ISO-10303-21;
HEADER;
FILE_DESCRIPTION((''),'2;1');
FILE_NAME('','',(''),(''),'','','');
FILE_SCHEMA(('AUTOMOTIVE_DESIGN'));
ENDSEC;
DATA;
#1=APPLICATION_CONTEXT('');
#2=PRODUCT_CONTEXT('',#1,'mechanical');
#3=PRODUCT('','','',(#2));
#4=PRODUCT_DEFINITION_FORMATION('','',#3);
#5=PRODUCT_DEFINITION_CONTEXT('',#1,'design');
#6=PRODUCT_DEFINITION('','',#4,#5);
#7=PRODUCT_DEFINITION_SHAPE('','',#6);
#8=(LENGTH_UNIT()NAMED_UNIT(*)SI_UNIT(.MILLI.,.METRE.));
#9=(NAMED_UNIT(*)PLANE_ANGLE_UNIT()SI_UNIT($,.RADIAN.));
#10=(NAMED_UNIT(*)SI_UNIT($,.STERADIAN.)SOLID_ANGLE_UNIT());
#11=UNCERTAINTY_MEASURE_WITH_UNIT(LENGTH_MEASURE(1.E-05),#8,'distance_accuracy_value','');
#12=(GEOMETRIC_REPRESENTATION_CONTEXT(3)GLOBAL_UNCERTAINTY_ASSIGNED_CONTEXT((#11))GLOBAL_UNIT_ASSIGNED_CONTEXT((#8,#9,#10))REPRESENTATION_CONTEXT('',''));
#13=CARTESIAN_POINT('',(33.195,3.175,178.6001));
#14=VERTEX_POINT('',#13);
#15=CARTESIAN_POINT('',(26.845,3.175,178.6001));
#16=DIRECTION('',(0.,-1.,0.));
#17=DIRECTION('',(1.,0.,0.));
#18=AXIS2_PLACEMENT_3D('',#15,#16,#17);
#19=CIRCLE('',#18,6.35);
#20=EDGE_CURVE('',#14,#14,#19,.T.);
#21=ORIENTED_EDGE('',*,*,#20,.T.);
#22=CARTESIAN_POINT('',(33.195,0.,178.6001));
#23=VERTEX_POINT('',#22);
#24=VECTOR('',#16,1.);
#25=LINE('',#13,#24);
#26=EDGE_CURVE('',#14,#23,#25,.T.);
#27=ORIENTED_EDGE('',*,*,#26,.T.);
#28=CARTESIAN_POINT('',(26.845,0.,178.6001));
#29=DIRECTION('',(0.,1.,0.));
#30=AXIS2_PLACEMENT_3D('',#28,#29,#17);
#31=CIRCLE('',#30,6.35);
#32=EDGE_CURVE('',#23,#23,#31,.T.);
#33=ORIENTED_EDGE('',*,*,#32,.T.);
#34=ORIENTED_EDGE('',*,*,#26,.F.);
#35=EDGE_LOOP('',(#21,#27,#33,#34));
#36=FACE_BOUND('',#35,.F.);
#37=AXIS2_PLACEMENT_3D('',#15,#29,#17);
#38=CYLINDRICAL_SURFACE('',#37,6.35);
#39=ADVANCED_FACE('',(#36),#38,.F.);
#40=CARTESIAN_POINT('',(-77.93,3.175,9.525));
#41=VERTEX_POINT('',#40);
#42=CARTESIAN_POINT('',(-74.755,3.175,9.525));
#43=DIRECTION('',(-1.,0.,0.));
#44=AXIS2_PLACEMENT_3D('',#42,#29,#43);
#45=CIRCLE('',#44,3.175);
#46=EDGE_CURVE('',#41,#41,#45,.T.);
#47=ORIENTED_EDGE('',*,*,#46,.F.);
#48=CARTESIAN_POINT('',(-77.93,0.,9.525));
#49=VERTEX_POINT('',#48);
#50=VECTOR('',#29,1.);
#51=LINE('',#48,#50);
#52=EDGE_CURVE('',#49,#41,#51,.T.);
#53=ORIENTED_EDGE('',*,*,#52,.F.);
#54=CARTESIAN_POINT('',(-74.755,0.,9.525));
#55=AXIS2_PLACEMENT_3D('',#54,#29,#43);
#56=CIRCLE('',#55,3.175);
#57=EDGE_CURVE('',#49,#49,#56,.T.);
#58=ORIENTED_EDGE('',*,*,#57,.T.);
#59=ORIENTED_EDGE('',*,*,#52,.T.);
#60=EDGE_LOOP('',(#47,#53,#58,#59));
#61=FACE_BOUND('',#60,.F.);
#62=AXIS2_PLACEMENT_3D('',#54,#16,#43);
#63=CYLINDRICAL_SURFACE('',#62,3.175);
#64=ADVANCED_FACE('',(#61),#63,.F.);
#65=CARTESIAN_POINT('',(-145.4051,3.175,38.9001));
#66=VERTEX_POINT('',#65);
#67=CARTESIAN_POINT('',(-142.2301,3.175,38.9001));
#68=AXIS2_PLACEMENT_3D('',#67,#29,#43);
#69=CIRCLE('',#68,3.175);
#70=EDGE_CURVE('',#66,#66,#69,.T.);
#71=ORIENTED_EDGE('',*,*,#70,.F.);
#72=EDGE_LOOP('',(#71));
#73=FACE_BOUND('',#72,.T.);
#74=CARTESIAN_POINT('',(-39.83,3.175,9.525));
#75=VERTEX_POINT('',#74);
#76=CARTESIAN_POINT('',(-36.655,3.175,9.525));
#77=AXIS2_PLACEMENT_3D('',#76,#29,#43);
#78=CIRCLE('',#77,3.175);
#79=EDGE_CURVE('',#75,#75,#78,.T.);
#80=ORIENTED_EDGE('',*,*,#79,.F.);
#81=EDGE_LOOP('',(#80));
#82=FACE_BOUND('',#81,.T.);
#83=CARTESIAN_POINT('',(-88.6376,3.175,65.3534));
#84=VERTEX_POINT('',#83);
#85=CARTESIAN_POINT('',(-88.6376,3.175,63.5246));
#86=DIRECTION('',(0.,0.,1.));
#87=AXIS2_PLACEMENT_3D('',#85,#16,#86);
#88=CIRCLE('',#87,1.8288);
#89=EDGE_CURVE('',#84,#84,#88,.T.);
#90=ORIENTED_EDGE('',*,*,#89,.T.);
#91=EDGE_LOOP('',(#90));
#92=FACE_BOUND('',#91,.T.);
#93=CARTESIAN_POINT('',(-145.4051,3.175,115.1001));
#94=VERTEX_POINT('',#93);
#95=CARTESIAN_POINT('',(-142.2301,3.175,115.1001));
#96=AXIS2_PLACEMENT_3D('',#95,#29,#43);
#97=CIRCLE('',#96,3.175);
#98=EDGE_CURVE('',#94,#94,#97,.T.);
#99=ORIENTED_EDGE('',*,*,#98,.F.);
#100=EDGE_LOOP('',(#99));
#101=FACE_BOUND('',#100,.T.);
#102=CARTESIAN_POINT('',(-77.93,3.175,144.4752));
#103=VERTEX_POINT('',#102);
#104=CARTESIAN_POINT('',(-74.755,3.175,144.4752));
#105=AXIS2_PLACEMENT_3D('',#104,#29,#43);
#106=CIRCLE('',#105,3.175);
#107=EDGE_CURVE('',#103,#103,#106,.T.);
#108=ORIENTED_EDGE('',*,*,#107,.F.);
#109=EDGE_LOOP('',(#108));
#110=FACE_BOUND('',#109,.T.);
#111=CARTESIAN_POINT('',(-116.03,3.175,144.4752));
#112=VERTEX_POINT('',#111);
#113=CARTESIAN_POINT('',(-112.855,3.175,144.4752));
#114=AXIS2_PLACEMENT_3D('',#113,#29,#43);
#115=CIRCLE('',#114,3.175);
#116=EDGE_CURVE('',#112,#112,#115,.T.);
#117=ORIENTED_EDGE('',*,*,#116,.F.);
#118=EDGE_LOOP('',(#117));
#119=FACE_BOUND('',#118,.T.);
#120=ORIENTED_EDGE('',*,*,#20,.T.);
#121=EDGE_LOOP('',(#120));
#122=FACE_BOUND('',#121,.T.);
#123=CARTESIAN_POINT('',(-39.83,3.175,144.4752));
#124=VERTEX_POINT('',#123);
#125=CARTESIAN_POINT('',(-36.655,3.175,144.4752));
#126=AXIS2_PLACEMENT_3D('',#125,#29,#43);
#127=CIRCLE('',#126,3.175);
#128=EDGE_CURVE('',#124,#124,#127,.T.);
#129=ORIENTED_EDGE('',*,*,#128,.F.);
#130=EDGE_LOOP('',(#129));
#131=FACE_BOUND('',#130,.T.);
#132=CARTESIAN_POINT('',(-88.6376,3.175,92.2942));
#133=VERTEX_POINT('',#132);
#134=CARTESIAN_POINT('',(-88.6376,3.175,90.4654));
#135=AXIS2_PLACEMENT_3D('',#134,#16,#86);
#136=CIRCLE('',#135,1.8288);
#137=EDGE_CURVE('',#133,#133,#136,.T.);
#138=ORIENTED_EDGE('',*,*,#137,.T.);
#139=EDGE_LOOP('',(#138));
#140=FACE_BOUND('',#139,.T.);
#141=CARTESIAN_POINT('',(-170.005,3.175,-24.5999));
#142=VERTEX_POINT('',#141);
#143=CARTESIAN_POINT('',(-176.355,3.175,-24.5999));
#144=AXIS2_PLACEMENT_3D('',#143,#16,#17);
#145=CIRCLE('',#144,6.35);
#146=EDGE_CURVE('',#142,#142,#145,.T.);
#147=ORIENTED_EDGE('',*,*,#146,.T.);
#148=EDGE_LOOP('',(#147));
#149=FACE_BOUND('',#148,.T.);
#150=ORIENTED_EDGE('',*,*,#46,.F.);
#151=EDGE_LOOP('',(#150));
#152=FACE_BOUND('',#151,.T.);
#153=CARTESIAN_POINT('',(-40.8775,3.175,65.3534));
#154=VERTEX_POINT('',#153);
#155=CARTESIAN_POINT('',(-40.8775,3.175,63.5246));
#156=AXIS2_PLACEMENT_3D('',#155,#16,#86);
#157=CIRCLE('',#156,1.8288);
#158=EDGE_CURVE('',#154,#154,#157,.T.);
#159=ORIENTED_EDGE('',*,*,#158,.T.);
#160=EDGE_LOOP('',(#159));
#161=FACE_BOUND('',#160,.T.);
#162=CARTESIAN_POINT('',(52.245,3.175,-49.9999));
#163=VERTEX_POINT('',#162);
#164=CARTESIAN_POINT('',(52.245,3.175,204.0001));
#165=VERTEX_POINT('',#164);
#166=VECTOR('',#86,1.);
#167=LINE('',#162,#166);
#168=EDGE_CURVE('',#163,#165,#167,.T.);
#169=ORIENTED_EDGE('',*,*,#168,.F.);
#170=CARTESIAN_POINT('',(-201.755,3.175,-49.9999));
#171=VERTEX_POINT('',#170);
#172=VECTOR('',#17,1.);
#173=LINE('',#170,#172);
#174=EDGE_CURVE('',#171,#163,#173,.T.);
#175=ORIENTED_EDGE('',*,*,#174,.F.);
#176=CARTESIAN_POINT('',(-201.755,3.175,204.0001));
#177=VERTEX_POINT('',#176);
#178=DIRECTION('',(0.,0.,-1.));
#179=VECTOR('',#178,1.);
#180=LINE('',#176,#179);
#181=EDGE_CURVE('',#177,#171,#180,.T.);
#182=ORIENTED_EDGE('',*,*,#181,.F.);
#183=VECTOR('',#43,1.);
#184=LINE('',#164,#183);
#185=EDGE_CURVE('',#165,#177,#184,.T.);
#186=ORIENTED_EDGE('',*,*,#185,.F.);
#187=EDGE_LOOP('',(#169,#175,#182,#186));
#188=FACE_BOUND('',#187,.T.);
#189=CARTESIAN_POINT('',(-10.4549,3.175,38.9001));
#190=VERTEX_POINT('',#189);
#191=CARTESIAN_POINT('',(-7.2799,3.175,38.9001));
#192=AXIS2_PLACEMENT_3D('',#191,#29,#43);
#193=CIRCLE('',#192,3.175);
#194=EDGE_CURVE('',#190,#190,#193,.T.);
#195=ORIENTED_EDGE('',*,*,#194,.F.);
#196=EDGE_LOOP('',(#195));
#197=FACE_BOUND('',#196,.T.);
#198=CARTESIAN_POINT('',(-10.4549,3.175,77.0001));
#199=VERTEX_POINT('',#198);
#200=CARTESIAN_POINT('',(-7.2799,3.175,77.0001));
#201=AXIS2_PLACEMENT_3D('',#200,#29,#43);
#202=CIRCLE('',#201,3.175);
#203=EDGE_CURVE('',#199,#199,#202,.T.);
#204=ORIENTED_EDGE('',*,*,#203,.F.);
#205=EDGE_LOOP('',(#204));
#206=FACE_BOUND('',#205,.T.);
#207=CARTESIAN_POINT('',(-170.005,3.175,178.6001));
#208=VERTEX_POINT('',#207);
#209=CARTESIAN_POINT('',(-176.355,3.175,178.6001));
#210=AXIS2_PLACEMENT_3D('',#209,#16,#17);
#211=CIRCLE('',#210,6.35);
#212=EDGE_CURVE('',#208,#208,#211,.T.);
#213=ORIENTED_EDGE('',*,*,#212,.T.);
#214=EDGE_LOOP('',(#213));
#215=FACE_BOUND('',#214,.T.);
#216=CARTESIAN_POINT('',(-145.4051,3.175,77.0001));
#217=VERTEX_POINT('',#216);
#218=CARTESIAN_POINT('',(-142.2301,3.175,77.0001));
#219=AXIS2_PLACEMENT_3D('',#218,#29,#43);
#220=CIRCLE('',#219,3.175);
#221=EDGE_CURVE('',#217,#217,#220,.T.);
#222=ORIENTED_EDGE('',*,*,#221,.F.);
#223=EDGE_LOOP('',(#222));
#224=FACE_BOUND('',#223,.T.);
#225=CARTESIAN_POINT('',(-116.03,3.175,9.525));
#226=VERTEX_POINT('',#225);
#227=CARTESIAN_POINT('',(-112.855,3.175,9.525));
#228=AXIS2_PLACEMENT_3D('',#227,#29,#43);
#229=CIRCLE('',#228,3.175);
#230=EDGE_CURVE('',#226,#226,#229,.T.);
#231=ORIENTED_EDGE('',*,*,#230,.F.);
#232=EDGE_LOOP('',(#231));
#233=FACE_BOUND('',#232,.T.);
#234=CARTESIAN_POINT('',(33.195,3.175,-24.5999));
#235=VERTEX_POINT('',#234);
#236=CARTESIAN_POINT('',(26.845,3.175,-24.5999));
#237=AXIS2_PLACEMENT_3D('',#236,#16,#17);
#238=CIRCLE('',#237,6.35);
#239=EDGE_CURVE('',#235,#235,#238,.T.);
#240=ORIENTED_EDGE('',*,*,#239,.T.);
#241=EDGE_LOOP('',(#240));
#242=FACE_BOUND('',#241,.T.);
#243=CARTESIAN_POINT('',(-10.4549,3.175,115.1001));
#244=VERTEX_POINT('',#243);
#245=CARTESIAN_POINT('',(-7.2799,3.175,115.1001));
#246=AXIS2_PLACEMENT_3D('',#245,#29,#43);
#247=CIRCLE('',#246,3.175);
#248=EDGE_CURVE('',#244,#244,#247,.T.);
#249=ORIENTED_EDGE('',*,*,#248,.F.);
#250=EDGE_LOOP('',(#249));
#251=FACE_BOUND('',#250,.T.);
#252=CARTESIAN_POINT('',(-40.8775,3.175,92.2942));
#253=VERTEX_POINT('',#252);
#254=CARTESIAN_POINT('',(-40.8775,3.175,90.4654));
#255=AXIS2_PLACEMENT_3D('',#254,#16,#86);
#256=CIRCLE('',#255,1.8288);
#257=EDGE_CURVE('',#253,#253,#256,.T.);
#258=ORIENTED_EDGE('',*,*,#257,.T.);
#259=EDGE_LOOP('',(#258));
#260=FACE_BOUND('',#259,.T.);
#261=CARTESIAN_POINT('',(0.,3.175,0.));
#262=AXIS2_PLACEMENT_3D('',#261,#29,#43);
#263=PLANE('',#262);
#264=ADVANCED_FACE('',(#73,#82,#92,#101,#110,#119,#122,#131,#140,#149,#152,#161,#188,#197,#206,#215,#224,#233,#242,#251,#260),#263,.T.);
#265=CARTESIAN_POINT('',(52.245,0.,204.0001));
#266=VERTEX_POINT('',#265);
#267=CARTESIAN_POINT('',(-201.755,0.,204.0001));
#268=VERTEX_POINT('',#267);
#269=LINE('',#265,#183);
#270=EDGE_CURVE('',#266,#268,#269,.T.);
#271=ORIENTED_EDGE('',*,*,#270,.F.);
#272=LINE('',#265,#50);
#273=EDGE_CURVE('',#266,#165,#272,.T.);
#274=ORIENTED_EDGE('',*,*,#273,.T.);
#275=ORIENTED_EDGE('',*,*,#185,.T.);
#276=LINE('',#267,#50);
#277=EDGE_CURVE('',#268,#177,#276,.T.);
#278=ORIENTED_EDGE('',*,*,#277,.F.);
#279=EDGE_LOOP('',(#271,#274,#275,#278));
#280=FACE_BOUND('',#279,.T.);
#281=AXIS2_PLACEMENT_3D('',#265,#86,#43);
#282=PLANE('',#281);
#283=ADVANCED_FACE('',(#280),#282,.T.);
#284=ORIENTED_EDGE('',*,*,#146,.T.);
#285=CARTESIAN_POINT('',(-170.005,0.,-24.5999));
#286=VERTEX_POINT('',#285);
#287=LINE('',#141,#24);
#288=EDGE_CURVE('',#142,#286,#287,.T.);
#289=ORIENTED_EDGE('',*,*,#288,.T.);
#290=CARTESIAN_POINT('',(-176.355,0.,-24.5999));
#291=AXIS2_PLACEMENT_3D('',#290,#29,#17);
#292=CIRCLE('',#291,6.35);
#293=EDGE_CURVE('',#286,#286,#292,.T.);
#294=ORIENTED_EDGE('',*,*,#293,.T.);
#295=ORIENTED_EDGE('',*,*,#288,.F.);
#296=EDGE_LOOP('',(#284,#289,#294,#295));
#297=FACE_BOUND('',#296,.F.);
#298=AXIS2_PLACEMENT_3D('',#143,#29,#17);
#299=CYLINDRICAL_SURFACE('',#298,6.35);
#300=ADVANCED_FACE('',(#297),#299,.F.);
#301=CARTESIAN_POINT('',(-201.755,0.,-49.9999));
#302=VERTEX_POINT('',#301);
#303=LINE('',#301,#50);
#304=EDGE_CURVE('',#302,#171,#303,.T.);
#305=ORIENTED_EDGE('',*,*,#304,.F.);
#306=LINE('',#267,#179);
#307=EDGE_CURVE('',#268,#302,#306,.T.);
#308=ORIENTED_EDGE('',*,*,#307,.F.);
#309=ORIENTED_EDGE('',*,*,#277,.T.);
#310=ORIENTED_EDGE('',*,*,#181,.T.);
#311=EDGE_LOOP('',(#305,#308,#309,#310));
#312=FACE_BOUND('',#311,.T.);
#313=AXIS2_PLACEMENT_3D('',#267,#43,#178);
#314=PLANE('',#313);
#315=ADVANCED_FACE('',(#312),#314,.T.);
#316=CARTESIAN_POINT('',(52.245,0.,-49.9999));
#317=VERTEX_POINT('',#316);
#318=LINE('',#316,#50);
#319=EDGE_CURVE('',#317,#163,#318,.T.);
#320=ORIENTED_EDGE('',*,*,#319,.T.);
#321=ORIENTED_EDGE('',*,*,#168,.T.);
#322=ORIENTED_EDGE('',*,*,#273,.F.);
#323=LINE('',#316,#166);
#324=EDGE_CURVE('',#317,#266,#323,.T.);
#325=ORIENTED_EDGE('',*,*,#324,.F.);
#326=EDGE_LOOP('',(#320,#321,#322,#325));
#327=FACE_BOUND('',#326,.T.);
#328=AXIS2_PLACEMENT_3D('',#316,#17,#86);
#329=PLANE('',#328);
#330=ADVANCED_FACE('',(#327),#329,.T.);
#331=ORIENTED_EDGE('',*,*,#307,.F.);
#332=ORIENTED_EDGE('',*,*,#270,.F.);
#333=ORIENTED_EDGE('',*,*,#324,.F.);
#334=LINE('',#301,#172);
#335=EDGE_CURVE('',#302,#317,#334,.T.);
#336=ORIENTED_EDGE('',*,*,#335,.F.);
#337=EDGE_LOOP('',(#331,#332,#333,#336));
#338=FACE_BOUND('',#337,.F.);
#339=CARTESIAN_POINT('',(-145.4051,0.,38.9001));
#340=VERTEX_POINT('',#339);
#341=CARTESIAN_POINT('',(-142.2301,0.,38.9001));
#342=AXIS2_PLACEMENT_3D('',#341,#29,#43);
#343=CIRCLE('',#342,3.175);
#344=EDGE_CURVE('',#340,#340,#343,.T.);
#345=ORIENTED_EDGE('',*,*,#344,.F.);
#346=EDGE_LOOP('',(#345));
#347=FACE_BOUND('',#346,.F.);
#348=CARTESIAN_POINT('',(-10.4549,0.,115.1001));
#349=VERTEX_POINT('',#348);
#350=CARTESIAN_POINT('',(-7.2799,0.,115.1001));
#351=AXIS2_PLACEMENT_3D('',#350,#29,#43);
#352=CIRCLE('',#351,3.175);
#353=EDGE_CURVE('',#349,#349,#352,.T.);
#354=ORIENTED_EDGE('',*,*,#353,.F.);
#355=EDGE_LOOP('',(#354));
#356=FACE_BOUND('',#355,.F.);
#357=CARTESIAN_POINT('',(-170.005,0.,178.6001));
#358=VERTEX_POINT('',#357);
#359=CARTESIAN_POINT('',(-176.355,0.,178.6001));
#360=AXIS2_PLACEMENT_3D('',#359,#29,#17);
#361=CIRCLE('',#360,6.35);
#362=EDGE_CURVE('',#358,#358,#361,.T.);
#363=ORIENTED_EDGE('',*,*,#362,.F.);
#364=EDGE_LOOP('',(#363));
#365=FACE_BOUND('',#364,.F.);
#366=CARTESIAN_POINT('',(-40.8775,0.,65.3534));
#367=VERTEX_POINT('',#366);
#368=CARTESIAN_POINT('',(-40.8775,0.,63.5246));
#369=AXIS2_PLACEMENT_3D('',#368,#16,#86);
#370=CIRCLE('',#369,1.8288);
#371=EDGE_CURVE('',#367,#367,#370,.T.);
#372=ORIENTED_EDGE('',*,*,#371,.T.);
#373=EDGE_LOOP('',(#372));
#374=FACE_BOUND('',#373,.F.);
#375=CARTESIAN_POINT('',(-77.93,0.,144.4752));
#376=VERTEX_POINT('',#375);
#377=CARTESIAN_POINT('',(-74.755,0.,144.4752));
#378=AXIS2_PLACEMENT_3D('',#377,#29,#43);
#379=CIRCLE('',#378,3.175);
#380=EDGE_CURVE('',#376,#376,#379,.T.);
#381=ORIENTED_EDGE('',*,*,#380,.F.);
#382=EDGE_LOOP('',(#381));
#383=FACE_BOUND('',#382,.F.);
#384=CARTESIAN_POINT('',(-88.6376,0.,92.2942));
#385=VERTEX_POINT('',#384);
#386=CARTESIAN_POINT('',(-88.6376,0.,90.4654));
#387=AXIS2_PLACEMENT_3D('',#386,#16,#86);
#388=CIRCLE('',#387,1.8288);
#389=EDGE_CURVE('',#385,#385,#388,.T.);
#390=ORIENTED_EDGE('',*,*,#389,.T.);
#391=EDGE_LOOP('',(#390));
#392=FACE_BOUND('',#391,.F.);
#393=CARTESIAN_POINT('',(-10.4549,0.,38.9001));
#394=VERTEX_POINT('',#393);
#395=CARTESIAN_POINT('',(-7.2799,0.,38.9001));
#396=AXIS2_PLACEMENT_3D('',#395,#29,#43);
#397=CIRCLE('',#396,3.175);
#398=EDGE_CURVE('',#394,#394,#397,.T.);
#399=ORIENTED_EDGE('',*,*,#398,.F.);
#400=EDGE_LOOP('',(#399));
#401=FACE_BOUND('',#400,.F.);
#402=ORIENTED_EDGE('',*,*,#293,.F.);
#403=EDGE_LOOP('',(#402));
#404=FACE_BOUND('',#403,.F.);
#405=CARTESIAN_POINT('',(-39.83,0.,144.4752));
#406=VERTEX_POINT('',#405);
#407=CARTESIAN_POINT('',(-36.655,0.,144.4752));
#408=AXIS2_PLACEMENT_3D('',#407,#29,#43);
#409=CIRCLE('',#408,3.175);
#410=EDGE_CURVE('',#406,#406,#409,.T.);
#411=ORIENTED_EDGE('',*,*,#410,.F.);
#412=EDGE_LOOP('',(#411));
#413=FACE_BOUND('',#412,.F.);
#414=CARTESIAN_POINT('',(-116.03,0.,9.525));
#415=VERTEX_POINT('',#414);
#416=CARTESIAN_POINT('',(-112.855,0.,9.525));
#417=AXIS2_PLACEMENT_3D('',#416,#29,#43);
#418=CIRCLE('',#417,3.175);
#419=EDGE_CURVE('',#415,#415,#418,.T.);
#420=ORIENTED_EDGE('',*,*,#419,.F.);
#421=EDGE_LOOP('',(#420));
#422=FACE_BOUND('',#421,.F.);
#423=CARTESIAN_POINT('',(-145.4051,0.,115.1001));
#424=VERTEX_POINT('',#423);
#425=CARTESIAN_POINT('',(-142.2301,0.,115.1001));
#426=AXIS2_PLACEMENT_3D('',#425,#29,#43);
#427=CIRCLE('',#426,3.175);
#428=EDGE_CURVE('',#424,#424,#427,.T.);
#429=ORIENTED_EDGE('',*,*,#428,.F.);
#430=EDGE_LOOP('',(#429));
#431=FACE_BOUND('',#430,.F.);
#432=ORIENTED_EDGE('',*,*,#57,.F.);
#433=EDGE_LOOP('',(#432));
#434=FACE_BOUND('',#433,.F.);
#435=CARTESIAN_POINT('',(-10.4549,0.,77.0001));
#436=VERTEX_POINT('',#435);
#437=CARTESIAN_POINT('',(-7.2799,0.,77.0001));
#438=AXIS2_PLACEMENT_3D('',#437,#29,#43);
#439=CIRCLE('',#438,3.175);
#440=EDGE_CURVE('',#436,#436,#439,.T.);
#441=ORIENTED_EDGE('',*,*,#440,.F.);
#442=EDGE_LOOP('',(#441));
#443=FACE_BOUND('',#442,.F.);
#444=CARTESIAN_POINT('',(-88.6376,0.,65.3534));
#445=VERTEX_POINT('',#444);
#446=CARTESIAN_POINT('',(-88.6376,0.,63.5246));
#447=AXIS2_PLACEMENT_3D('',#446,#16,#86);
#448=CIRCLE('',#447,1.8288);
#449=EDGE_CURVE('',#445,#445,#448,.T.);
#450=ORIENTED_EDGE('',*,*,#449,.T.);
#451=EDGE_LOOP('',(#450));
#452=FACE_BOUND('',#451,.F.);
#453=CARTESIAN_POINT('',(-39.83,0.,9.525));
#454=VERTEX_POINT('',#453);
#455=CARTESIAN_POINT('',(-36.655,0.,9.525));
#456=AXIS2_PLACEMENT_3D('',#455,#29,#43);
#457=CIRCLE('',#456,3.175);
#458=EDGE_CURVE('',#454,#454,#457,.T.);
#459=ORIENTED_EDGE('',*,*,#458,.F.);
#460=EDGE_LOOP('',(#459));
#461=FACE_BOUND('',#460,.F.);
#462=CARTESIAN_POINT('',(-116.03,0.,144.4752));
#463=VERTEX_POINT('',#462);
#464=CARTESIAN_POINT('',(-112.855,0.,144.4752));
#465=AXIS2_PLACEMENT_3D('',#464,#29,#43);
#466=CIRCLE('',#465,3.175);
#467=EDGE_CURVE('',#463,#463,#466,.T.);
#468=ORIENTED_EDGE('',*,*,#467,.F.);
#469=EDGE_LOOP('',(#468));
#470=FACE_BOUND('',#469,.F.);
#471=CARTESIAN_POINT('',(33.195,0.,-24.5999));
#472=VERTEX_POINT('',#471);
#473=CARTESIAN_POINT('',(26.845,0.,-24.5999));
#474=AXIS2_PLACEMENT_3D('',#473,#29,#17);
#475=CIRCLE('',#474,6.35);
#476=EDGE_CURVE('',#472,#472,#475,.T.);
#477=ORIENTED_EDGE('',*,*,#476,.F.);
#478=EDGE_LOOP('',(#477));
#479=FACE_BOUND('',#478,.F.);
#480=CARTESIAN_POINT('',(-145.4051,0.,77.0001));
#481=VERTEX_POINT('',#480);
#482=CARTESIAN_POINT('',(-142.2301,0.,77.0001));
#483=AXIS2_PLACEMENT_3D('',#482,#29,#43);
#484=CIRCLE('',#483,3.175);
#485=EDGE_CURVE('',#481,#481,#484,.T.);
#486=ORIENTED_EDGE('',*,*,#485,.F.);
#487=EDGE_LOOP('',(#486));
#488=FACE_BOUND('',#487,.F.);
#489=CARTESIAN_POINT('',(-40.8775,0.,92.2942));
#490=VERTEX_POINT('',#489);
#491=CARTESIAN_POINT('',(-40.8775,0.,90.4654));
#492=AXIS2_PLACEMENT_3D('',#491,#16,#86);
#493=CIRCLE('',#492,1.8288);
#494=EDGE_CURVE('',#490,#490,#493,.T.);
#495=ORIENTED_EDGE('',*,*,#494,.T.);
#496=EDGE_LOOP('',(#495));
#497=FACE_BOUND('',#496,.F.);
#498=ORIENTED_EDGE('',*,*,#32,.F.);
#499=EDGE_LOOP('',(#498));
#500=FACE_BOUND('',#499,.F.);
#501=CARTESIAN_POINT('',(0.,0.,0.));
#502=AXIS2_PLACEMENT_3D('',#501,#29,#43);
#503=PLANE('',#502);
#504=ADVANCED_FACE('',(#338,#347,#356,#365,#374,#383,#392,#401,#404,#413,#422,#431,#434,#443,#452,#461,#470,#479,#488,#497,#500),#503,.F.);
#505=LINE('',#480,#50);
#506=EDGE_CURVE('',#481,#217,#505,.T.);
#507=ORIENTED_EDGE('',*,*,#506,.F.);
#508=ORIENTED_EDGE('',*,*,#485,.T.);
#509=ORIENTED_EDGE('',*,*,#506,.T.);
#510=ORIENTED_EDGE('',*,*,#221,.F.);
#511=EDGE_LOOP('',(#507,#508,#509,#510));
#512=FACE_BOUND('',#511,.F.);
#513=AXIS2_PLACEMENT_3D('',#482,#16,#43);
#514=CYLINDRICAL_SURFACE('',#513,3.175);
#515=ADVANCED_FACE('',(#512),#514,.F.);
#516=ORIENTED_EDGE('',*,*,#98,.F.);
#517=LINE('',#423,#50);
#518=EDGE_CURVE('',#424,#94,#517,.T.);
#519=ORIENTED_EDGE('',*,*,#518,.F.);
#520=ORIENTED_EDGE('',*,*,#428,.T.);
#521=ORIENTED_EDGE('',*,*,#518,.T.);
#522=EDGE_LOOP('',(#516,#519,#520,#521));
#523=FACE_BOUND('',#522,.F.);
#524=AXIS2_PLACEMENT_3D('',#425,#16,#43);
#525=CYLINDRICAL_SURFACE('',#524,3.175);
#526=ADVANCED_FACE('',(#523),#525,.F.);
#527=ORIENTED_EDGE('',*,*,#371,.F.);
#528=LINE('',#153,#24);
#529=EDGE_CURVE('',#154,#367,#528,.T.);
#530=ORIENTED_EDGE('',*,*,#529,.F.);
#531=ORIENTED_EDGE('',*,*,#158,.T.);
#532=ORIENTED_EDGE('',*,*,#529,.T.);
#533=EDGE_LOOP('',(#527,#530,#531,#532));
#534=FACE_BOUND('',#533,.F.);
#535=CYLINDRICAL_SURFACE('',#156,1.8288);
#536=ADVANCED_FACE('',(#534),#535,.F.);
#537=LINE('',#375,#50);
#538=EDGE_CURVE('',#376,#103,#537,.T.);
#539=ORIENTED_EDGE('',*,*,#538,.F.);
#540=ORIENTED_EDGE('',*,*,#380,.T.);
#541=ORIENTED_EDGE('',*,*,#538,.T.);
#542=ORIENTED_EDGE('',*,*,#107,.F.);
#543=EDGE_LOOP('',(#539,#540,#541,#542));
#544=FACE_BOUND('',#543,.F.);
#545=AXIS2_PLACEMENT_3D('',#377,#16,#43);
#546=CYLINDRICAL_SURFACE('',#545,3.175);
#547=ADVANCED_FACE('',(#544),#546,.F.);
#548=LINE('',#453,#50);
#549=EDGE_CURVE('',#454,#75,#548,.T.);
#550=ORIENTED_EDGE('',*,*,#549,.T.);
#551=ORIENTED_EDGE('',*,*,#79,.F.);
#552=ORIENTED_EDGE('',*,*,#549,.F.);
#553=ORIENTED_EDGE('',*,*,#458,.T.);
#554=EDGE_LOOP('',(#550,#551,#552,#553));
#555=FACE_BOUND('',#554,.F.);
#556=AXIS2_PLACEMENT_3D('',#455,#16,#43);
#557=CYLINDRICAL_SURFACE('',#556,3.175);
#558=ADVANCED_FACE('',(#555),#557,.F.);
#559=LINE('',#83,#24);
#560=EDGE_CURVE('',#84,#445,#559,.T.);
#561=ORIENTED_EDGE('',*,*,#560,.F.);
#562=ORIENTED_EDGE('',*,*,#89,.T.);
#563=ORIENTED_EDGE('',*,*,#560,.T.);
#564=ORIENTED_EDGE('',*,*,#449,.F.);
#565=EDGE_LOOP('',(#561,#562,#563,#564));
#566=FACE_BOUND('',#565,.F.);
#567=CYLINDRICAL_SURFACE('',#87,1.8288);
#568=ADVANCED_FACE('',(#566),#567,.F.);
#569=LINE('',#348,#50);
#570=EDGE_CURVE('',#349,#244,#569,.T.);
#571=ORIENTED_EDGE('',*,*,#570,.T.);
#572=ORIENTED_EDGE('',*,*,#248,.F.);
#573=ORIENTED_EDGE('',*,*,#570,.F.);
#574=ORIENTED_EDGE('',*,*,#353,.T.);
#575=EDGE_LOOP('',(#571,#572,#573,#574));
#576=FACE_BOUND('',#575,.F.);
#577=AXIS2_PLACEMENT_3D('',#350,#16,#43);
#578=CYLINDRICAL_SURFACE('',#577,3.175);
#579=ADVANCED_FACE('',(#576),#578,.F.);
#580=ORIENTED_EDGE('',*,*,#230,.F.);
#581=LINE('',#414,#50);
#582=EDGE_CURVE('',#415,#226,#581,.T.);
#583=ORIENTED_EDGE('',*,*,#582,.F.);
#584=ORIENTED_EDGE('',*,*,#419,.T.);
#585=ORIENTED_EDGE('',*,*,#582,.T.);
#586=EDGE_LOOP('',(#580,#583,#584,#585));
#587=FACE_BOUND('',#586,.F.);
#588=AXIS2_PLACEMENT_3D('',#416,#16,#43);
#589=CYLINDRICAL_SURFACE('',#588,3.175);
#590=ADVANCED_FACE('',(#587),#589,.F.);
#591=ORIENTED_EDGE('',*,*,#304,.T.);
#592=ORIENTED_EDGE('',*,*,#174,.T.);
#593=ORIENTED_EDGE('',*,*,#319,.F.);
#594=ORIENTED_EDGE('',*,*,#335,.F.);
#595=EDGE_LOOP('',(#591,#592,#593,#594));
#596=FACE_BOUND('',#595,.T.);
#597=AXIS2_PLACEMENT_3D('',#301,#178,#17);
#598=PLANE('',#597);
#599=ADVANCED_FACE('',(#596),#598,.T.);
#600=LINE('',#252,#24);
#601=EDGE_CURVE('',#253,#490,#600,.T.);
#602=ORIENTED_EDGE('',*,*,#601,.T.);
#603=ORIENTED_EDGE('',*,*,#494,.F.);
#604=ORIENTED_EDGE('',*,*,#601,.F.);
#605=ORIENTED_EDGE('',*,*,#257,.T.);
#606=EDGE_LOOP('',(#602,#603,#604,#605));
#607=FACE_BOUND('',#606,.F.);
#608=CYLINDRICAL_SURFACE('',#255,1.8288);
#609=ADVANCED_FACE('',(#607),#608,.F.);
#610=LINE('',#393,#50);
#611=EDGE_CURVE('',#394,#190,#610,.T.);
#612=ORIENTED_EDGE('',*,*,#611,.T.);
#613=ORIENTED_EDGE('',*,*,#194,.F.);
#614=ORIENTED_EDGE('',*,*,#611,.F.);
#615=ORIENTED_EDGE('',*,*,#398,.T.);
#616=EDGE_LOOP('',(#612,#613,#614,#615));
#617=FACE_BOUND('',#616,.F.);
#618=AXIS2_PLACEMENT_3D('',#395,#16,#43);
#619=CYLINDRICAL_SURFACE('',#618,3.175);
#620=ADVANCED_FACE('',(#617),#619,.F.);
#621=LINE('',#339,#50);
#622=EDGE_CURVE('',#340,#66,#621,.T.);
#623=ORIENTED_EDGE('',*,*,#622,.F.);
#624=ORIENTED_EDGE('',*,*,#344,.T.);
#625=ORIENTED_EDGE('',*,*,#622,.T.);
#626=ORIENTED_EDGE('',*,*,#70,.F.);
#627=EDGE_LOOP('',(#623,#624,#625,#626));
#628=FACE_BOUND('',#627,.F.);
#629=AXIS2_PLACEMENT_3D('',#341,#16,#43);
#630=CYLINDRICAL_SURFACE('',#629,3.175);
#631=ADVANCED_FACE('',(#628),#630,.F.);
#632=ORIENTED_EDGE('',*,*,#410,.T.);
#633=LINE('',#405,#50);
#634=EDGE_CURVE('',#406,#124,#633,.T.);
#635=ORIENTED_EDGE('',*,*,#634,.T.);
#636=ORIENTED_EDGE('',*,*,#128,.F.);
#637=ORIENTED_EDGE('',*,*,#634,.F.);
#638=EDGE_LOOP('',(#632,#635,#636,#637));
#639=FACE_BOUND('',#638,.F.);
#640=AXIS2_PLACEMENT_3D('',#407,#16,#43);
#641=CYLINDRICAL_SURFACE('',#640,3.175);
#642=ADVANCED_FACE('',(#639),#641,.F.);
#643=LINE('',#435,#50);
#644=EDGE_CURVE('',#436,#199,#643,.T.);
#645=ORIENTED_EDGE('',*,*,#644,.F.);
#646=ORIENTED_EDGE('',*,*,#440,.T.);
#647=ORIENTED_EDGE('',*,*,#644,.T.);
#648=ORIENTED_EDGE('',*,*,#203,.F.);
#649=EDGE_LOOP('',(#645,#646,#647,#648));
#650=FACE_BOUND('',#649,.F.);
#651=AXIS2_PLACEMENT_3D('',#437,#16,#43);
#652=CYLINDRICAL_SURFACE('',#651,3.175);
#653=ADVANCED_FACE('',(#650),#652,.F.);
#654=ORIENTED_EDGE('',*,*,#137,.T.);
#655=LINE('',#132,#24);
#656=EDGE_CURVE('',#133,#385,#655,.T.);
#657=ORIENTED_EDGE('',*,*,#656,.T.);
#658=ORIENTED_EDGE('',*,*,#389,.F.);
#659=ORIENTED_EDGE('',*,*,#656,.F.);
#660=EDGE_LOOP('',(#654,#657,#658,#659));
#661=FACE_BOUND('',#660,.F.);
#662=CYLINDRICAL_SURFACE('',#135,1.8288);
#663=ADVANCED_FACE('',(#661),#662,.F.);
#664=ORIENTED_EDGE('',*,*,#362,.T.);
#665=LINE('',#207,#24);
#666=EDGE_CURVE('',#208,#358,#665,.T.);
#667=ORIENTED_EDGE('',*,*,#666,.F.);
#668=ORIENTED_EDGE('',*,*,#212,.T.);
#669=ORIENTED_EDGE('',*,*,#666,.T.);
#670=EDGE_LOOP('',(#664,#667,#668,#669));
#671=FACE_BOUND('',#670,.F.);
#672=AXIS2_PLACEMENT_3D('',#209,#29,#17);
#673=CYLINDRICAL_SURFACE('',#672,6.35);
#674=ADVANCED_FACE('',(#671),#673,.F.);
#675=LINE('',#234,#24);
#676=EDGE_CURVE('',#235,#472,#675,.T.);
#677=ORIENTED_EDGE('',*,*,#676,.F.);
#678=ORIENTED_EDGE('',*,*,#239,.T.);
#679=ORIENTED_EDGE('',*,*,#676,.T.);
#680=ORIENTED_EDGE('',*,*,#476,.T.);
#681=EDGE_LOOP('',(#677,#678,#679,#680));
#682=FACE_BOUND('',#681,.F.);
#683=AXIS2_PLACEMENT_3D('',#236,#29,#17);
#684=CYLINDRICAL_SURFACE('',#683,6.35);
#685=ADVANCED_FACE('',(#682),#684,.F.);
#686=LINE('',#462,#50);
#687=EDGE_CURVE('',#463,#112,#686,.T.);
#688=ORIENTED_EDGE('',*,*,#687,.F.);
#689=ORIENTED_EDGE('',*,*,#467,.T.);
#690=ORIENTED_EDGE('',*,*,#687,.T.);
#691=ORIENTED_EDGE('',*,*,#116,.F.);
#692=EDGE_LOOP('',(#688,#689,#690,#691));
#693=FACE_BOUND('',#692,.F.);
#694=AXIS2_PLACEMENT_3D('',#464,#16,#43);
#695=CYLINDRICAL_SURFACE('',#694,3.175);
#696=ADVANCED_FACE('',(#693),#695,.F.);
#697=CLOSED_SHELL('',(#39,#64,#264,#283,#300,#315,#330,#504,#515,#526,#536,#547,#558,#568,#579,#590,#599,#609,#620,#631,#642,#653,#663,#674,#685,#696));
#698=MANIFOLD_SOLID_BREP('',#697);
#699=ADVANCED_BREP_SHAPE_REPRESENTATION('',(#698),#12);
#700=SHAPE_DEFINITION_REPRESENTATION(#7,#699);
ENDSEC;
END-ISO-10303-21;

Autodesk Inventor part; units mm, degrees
ref_plane "YZ Plane" through (0, 0, 0) normal (1, 0, 0) x (0, 1, 0)
ref_plane "XZ Plane" through (0, 0, 0) normal (0, 1, 0) x (-1, 0, 0)
ref_plane "XY Plane" through (0, 0, 0) normal (0, 0, 1) x (1, 0, 0)
sketch "Sketch1" plane through (0, 0, 0) normal (0, 1, 0) x (-1, 0, 0)
  line L0 (-2.2451, 151.7551) -> (-2.2451, 2.2451)
  line L1 (16.8049, 21.2951) -> (-2.2451, 2.2451)
  line L2 (16.8049, 132.7051) -> (16.8049, 21.2951)
  line L3 (-2.2451, 151.7551) -> (16.8049, 132.7051)
  line L4 (0, 0) -> (149.5101, 0)
  line L5 (130.4601, 19.05) -> (149.5101, 0)
  line L6 (19.05, 19.05) -> (130.4601, 19.05)
  line L7 (0, 0) -> (19.05, 19.05)
  line L8 (151.7551, 2.2451) -> (151.7551, 151.7551)
  line L9 (132.7051, 132.7051) -> (151.7551, 151.7551)
  line L10 (132.7051, 21.2951) -> (132.7051, 132.7051)
  line L11 (151.7551, 2.2451) -> (132.7051, 21.2951)
  line L12 (149.5101, 154.0002) -> (0, 154.0002)
  line L13 (19.05, 134.9502) -> (0, 154.0002)
  line L14 (130.4601, 134.9502) -> (19.05, 134.9502)
  line L15 (149.5101, 154.0002) -> (130.4601, 134.9502)
  line L16 (9.525, 144.4752) -> (139.9851, 144.4752) construction
  line L17 (149.5101, 154.0002) -> (130.4601, 134.9502) construction
  line L18 (151.7551, 151.7551) -> (132.7051, 132.7051) construction
  line L19 (142.2301, 142.2301) -> (142.2301, 11.7701) construction
  line L20 (130.4601, 19.05) -> (149.5101, 0) construction
  line L21 (139.9851, 9.525) -> (9.525, 9.525) construction
  line L22 (0, 0) -> (19.05, 19.05) construction
  line L23 (-2.2451, 2.2451) -> (16.8049, 21.2951) construction
  line L24 (7.2799, 11.7701) -> (7.2799, 142.2301) construction
  circle A0 centre (142.2301, 77.0001) radius 3.175
  circle A1 centre (74.755, 9.525) radius 3.175
  circle A2 centre (7.2799, 77.0001) radius 3.175
  circle A3 centre (74.755, 144.4752) radius 3.175
  circle A4 centre (112.855, 144.4752) radius 3.175
  circle A5 centre (36.655, 144.4752) radius 3.175
  circle A6 centre (74.755, 144.4752) radius 3.175
  circle A7 centre (7.2799, 38.9001) radius 3.175
  circle A8 centre (7.2799, 115.1001) radius 3.175
  circle A9 centre (7.2799, 77.0001) radius 3.175
  circle A10 centre (142.2301, 115.1001) radius 3.175
  circle A11 centre (142.2301, 38.9001) radius 3.175
  circle A12 centre (142.2301, 77.0001) radius 3.175
  circle A13 centre (36.655, 9.525) radius 3.175
  circle A14 centre (112.855, 9.525) radius 3.175
  circle A15 centre (74.755, 9.525) radius 3.175
  circle A16 centre (74.755, 77.0001) radius 57.9501 construction
  line L25 (-52.245, 204.0001) -> (201.755, 204.0001)
  line L26 (201.755, 204.0001) -> (201.755, -49.9999)
  line L27 (201.755, -49.9999) -> (-52.245, -49.9999)
  line L28 (-52.245, -49.9999) -> (-52.245, 204.0001)
  line L29 (-52.245, 204.0001) -> (201.755, -49.9999) construction
  line L30 (201.755, 204.0001) -> (-52.245, -49.9999) construction
  point P0 (151.7551, 0)
  dimension "d16" = 19.05
  dimension "d17" = 19.05
  dimension "d18" = 19.05
  dimension "d19" = 19.05
  dimension "d20" = 6.35
  dimension "d21" = 6.35
  dimension "d22" = 6.35
  dimension "d23" = 6.35
  dimension "d24" = 65.23
  dimension "d25" = 9.525
  dimension "d26" = 38.1
  dimension "d27" = 38.1
  dimension "d28" = 38.1
  dimension "d29" = 38.1
  dimension "d30" = 38.1
  dimension "d31" = 38.1
  dimension "d32" = 38.1
  dimension "d33" = 38.1
  dimension "d34" = 90
  dimension "d35" = 45
  dimension "d36" = 90
  dimension "d37" = 90
  dimension "d38" = 90
  dimension "d39" = 3.175
  dimension "d40" = 19.05
  dimension "d41" = 19.05
  dimension "d42" = 134.9502
  dimension "d43" = 154.0002
  dimension "d44" = 288.9504
  dimension "d45" = 154.0002
  dimension "d46" = 6.35
  dimension "d47" = 0
  dimension "d48" = 108.8946
  dimension "d49" = 151.7551
  dimension "d50" = 154.0002
  dimension "d51" = 6.35
  dimension "d52" = 211.4392
  dimension "d53" = 108.8946
  dimension "d54" = 3.175
  dimension "d55" = 214.6142
  dimension "d56" = 1.5875
  dimension "d57" = 254
  dimension "d58" = 254
extrude "Plate1" add sketch "Sketch1" along normal blind 3.175 contours L3 L2 L1 L0 | L7 L6 L5 L4 | L11 L10 L9 L8 | L15 L14 L13 L12 | L25 L26 L27 L28
sketch "Sketch2" plane through (0, 3.175, 0) normal (0, 1, 0) x (1, 0, 0)
  line L0 (-201.755, 49.9999) -> (52.245, 49.9999) projected
  line L1 (-201.755, -204.0001) -> (-201.755, 49.9999) projected
  line L2 (52.245, -204.0001) -> (-201.755, -204.0001) projected
  line L3 (52.245, 49.9999) -> (52.245, -204.0001) projected
  line L4 (26.845, 24.5999) -> (-176.355, 24.5999)
  line L5 (-176.355, 24.5999) -> (-176.355, -178.6001)
  line L6 (-176.355, -178.6001) -> (26.845, -178.6001)
  line L7 (26.845, -178.6001) -> (26.845, 24.5999)
  circle A0 centre (-176.355, 24.5999) radius 6.35
  circle A1 centre (26.845, 24.5999) radius 6.35
  circle A2 centre (-176.355, -178.6001) radius 6.35
  circle A3 centre (26.845, -178.6001) radius 6.35
  point P0 (0, 0)
  dimension "d60" = 203.2
  dimension "d61" = 12.7
  dimension "d62" = 12.7
  dimension "d63" = 12.7
  dimension "d64" = 12.7
extrude "Cut1" cut sketch "Sketch2" against normal blind 3.175 contours A0 L5 L4 | L4 L5 A0 | A1 L7 L4 | L4 L7 A1 | A2 L6 L5 | L5 L6 A2 | A3 L6 L7 | L7 L6 A3
sketch "Sketch7" plane through (-64.7482, 0, 77.0128) normal (0, 1, 0) x (0, 0, 1)
  line L0 (15.2484, -23.8801) -> (15.2484, -22.1021)
  arc A0 (11.6924, -23.8801) -> (15.2484, -23.8801) centre (13.4704, -23.8801) ccw
  line L1 (11.6924, -22.1021) -> (11.6924, -23.8801)
  arc A1 (15.2484, -22.1021) -> (11.6924, -22.1021) centre (13.4704, -22.1021) ccw
  line L2 (11.6924, 23.8801) -> (11.6924, 22.1021)
  arc A2 (15.2484, 23.8801) -> (11.6924, 23.8801) centre (13.4704, 23.8801) ccw
  line L3 (15.2484, 22.1021) -> (15.2484, 23.8801)
  arc A3 (11.6924, 22.1021) -> (15.2484, 22.1021) centre (13.4704, 22.1021) ccw
  line L4 (11.6924, 15.9807) -> (11.6924, 14.2027)
  arc A4 (15.2484, 15.9807) -> (11.6924, 15.9807) centre (13.4704, 15.9807) ccw
  line L5 (15.2484, 14.2027) -> (15.2484, 15.9807)
  arc A5 (11.6924, 14.2027) -> (15.2484, 14.2027) centre (13.4704, 14.2027) ccw
  line L6 (15.2484, 3.0607) -> (15.2484, 4.8387)
  arc A6 (11.6924, 3.0607) -> (15.2484, 3.0607) centre (13.4704, 3.0607) ccw
  line L7 (11.6924, 4.8387) -> (11.6924, 3.0607)
  arc A7 (15.2484, 4.8387) -> (11.6924, 4.8387) centre (13.4704, 4.8387) ccw
  line L8 (15.2484, -4.8387) -> (15.2484, -3.0607)
  arc A8 (11.6924, -4.8387) -> (15.2484, -4.8387) centre (13.4704, -4.8387) ccw
  line L9 (11.6924, -3.0607) -> (11.6924, -4.8387)
  arc A9 (15.2484, -3.0607) -> (11.6924, -3.0607) centre (13.4704, -3.0607) ccw
  line L10 (15.2484, -15.9807) -> (15.2484, -14.2027)
  arc A10 (11.6924, -15.9807) -> (15.2484, -15.9807) centre (13.4704, -15.9807) ccw
  line L11 (11.6924, -14.2027) -> (11.6924, -15.9807)
  arc A11 (15.2484, -14.2027) -> (11.6924, -14.2027) centre (13.4704, -14.2027) ccw
  line L12 (-15.2484, 23.8801) -> (-15.2484, 22.1021)
  arc A12 (-11.6924, 23.8801) -> (-15.2484, 23.8801) centre (-13.4704, 23.8801) ccw
  line L13 (-11.6924, 22.1021) -> (-11.6924, 23.8801)
  arc A13 (-15.2484, 22.1021) -> (-11.6924, 22.1021) centre (-13.4704, 22.1021) ccw
  line L14 (-15.2484, 15.9807) -> (-15.2484, 14.2027)
  arc A14 (-11.6924, 15.9807) -> (-15.2484, 15.9807) centre (-13.4704, 15.9807) ccw
  line L15 (-11.6924, 14.2027) -> (-11.6924, 15.9807)
  arc A15 (-15.2484, 14.2027) -> (-11.6924, 14.2027) centre (-13.4704, 14.2027) ccw
  line L16 (-11.6924, 3.0607) -> (-11.6924, 4.8387)
  arc A16 (-15.2484, 3.0607) -> (-11.6924, 3.0607) centre (-13.4704, 3.0607) ccw
  line L17 (-15.2484, 4.8387) -> (-15.2484, 3.0607)
  arc A17 (-11.6924, 4.8387) -> (-15.2484, 4.8387) centre (-13.4704, 4.8387) ccw
  line L18 (-11.6924, -4.8387) -> (-11.6924, -3.0607)
  arc A18 (-15.2484, -4.8387) -> (-11.6924, -4.8387) centre (-13.4704, -4.8387) ccw
  line L19 (-15.2484, -3.0607) -> (-15.2484, -4.8387)
  arc A19 (-11.6924, -3.0607) -> (-15.2484, -3.0607) centre (-13.4704, -3.0607) ccw
  line L20 (-11.6924, -15.9807) -> (-11.6924, -14.2027)
  arc A20 (-15.2484, -15.9807) -> (-11.6924, -15.9807) centre (-13.4704, -15.9807) ccw
  line L21 (-15.2484, -14.2027) -> (-15.2484, -15.9807)
  arc A21 (-11.6924, -14.2027) -> (-15.2484, -14.2027) centre (-13.4704, -14.2027) ccw
  line L22 (-11.6924, -23.8801) -> (-11.6924, -22.1021)
  arc A22 (-15.2484, -23.8801) -> (-11.6924, -23.8801) centre (-13.4704, -23.8801) ccw
  line L23 (-15.2484, -22.1021) -> (-15.2484, -23.8801)
  arc A23 (-11.6924, -22.1021) -> (-15.2484, -22.1021) centre (-13.4704, -22.1021) ccw
  arc A24 (6.3525, -24) -> (3.6475, -24) centre (5, -24) ccw
  arc A25 (3.6475, -24) -> (6.3525, -24) centre (5, -24) ccw
  arc A26 (6.3525, 24) -> (3.6475, 24) centre (5, 24) ccw
  arc A27 (3.6475, 24) -> (6.3525, 24) centre (5, 24) ccw
  line L24 (-10.16, 20.828) -> (-10.16, -20.828)
  arc A28 (-6.096, 20.828) -> (-10.16, 20.828) centre (-8.128, 20.828) ccw
  line L25 (-2.3813, 20.828) -> (-6.096, 20.828)
  line L26 (-2.3813, 25.908) -> (-2.3813, 20.828)
  arc A29 (2.3812, 25.908) -> (-2.3813, 25.908) centre (0, 25.908) ccw
  line L27 (2.3812, 20.828) -> (2.3812, 25.908)
  line L28 (6.096, 20.828) -> (2.3812, 20.828)
  arc A30 (10.16, 20.828) -> (6.096, 20.828) centre (8.128, 20.828) ccw
  line L29 (10.16, -20.828) -> (10.16, 20.828)
  arc A31 (6.096, -20.828) -> (10.16, -20.828) centre (8.128, -20.828) ccw
  line L30 (2.3813, -20.828) -> (6.096, -20.828)
  line L31 (2.3813, -25.908) -> (2.3813, -20.828)
  arc A32 (-2.3812, -25.908) -> (2.3813, -25.908) centre (0, -25.908) ccw
  line L32 (-2.3813, -20.828) -> (-2.3812, -25.908)
  line L33 (-6.096, -20.828) -> (-2.3813, -20.828)
  arc A33 (-10.16, -20.828) -> (-6.096, -20.828) centre (-8.128, -20.828) ccw
  arc A34 (-4.572, -28.448) -> (4.572, -28.448) centre (0, -24.8232) ccw
  line L34 (4.572, -28.448) -> (13.462, -28.448)
  arc A35 (13.462, -28.448) -> (16.637, -25.273) centre (13.462, -25.273) ccw
  line L35 (16.637, -25.273) -> (16.637, 25.273)
  arc A36 (16.637, 25.273) -> (13.462, 28.448) centre (13.462, 25.273) ccw
  line L36 (13.462, 28.448) -> (4.572, 28.448)
  arc A37 (4.572, 28.448) -> (-4.572, 28.448) centre (0, 24.8232) ccw
  line L37 (-4.572, 28.448) -> (-13.462, 28.448)
  arc A38 (-13.462, 28.448) -> (-16.637, 25.273) centre (-13.462, 25.273) ccw
  line L38 (-16.637, 25.273) -> (-16.637, -25.273)
  arc A39 (-16.637, -25.273) -> (-13.462, -28.448) centre (-13.462, -25.273) ccw
  line L39 (-13.462, -28.448) -> (-4.572, -28.448)
  arc A40 (-3.6475, 24) -> (-6.3525, 24) centre (-5, 24) ccw
  arc A41 (-6.3525, 24) -> (-3.6475, 24) centre (-5, 24) ccw
  arc A42 (-3.6475, -24) -> (-6.3525, -24) centre (-5, -24) ccw
  arc A43 (-6.3525, -24) -> (-3.6475, -24) centre (-5, -24) ccw
  line L40 (15.2484, -23.8801) -> (15.2484, -22.1021)
  arc A44 (11.6924, -23.8801) -> (15.2484, -23.8801) centre (13.4704, -23.8801) ccw
  line L41 (11.6924, -22.1021) -> (11.6924, -23.8801)
  arc A45 (15.2484, -22.1021) -> (11.6924, -22.1021) centre (13.4704, -22.1021) ccw
  line L42 (11.6924, 23.8801) -> (11.6924, 22.1021)
  arc A46 (15.2484, 23.8801) -> (11.6924, 23.8801) centre (13.4704, 23.8801) ccw
  line L43 (15.2484, 22.1021) -> (15.2484, 23.8801)
  arc A47 (11.6924, 22.1021) -> (15.2484, 22.1021) centre (13.4704, 22.1021) ccw
  line L44 (11.6924, 15.9807) -> (11.6924, 14.2027)
  arc A48 (15.2484, 15.9807) -> (11.6924, 15.9807) centre (13.4704, 15.9807) ccw
  line L45 (15.2484, 14.2027) -> (15.2484, 15.9807)
  arc A49 (11.6924, 14.2027) -> (15.2484, 14.2027) centre (13.4704, 14.2027) ccw
  line L46 (15.2484, 3.0607) -> (15.2484, 4.8387)
  arc A50 (11.6924, 3.0607) -> (15.2484, 3.0607) centre (13.4704, 3.0607) ccw
  line L47 (11.6924, 4.8387) -> (11.6924, 3.0607)
  arc A51 (15.2484, 4.8387) -> (11.6924, 4.8387) centre (13.4704, 4.8387) ccw
  line L48 (15.2484, -4.8387) -> (15.2484, -3.0607)
  arc A52 (11.6924, -4.8387) -> (15.2484, -4.8387) centre (13.4704, -4.8387) ccw
  line L49 (11.6924, -3.0607) -> (11.6924, -4.8387)
  arc A53 (15.2484, -3.0607) -> (11.6924, -3.0607) centre (13.4704, -3.0607) ccw
  line L50 (15.2484, -15.9807) -> (15.2484, -14.2027)
  arc A54 (11.6924, -15.9807) -> (15.2484, -15.9807) centre (13.4704, -15.9807) ccw
  line L51 (11.6924, -14.2027) -> (11.6924, -15.9807)
  arc A55 (15.2484, -14.2027) -> (11.6924, -14.2027) centre (13.4704, -14.2027) ccw
  line L52 (-15.2484, 23.8801) -> (-15.2484, 22.1021)
  arc A56 (-11.6924, 23.8801) -> (-15.2484, 23.8801) centre (-13.4704, 23.8801) ccw
  line L53 (-11.6924, 22.1021) -> (-11.6924, 23.8801)
  arc A57 (-15.2484, 22.1021) -> (-11.6924, 22.1021) centre (-13.4704, 22.1021) ccw
  line L54 (-15.2484, 15.9807) -> (-15.2484, 14.2027)
  arc A58 (-11.6924, 15.9807) -> (-15.2484, 15.9807) centre (-13.4704, 15.9807) ccw
  line L55 (-11.6924, 14.2027) -> (-11.6924, 15.9807)
  arc A59 (-15.2484, 14.2027) -> (-11.6924, 14.2027) centre (-13.4704, 14.2027) ccw
  line L56 (-11.6924, 3.0607) -> (-11.6924, 4.8387)
  arc A60 (-15.2484, 3.0607) -> (-11.6924, 3.0607) centre (-13.4704, 3.0607) ccw
  line L57 (-15.2484, 4.8387) -> (-15.2484, 3.0607)
  arc A61 (-11.6924, 4.8387) -> (-15.2484, 4.8387) centre (-13.4704, 4.8387) ccw
  line L58 (-11.6924, -4.8387) -> (-11.6924, -3.0607)
  arc A62 (-15.2484, -4.8387) -> (-11.6924, -4.8387) centre (-13.4704, -4.8387) ccw
  line L59 (-15.2484, -3.0607) -> (-15.2484, -4.8387)
  arc A63 (-11.6924, -3.0607) -> (-15.2484, -3.0607) centre (-13.4704, -3.0607) ccw
  line L60 (-11.6924, -15.9807) -> (-11.6924, -14.2027)
  arc A64 (-15.2484, -15.9807) -> (-11.6924, -15.9807) centre (-13.4704, -15.9807) ccw
  line L61 (-15.2484, -14.2027) -> (-15.2484, -15.9807)
  arc A65 (-11.6924, -14.2027) -> (-15.2484, -14.2027) centre (-13.4704, -14.2027) ccw
  line L62 (-11.6924, -23.8801) -> (-11.6924, -22.1021)
  arc A66 (-15.2484, -23.8801) -> (-11.6924, -23.8801) centre (-13.4704, -23.8801) ccw
  line L63 (-15.2484, -22.1021) -> (-15.2484, -23.8801)
  arc A67 (-11.6924, -22.1021) -> (-15.2484, -22.1021) centre (-13.4704, -22.1021) ccw
  arc A68 (6.3525, -24) -> (3.6475, -24) centre (5, -24) ccw
  arc A69 (3.6475, -24) -> (6.3525, -24) centre (5, -24) ccw
  arc A70 (6.3525, 24) -> (3.6475, 24) centre (5, 24) ccw
  arc A71 (3.6475, 24) -> (6.3525, 24) centre (5, 24) ccw
  line L64 (-10.16, 20.828) -> (-10.16, -20.828)
  arc A72 (-6.096, 20.828) -> (-10.16, 20.828) centre (-8.128, 20.828) ccw
  line L65 (-2.3813, 20.828) -> (-6.096, 20.828)
  line L66 (-2.3813, 25.908) -> (-2.3813, 20.828)
  arc A73 (2.3812, 25.908) -> (-2.3813, 25.908) centre (0, 25.908) ccw
  line L67 (2.3812, 20.828) -> (2.3812, 25.908)
  line L68 (6.096, 20.828) -> (2.3812, 20.828)
  arc A74 (10.16, 20.828) -> (6.096, 20.828) centre (8.128, 20.828) ccw
  line L69 (10.16, -20.828) -> (10.16, 20.828)
  arc A75 (6.096, -20.828) -> (10.16, -20.828) centre (8.128, -20.828) ccw
  line L70 (2.3813, -20.828) -> (6.096, -20.828)
  line L71 (2.3813, -25.908) -> (2.3813, -20.828)
  arc A76 (-2.3812, -25.908) -> (2.3813, -25.908) centre (0, -25.908) ccw
  line L72 (-2.3813, -20.828) -> (-2.3812, -25.908)
  line L73 (-6.096, -20.828) -> (-2.3813, -20.828)
  arc A77 (-10.16, -20.828) -> (-6.096, -20.828) centre (-8.128, -20.828) ccw
  arc A78 (-4.572, -28.448) -> (4.572, -28.448) centre (0, -24.8232) ccw
  line L74 (4.572, -28.448) -> (13.462, -28.448)
  arc A79 (13.462, -28.448) -> (16.637, -25.273) centre (13.462, -25.273) ccw
  line L75 (16.637, -25.273) -> (16.637, 25.273)
  arc A80 (16.637, 25.273) -> (13.462, 28.448) centre (13.462, 25.273) ccw
  line L76 (13.462, 28.448) -> (4.572, 28.448)
  arc A81 (4.572, 28.448) -> (-4.572, 28.448) centre (0, 24.8232) ccw
  line L77 (-4.572, 28.448) -> (-13.462, 28.448)
  arc A82 (-13.462, 28.448) -> (-16.637, 25.273) centre (-13.462, 25.273) ccw
  line L78 (-16.637, 25.273) -> (-16.637, -25.273)
  arc A83 (-16.637, -25.273) -> (-13.462, -28.448) centre (-13.462, -25.273) ccw
  line L79 (-13.462, -28.448) -> (-4.572, -28.448)
  arc A84 (-3.6475, 24) -> (-6.3525, 24) centre (-5, 24) ccw
  arc A85 (-6.3525, 24) -> (-3.6475, 24) centre (-5, 24) ccw
  arc A86 (-3.6475, -24) -> (-6.3525, -24) centre (-5, -24) ccw
  arc A87 (-6.3525, -24) -> (-3.6475, -24) centre (-5, -24) ccw
  circle A88 centre (13.4704, -23.8801) radius 1.778
  circle A89 centre (13.4704, 23.8801) radius 1.778
  circle A90 centre (13.4704, -4.8387) radius 1.778
  circle A91 centre (13.4704, 4.8387) radius 1.778
  circle A92 centre (-13.4704, -23.8801) radius 1.778
  circle A93 centre (-13.4704, 23.8801) radius 1.778
  circle A94 centre (-13.4704, -4.8387) radius 1.778
  circle A95 centre (-13.4704, 4.8387) radius 1.778
  point P0 (0, 0)
  point P1 (0, 0)
hole "Hole1" [suppressed]
sketch "Sketch8" plane through (0, 3.175, 0) normal (0, 1, 0) x (1, 0, 0)
  circle A0 centre (-88.6376, -63.5246) radius 1.778
  circle A1 centre (-88.6376, -90.4654) radius 1.778
  circle A2 centre (-40.8775, -63.5246) radius 1.778
  circle A3 centre (-40.8775, -90.4654) radius 1.778
  point P0 (0, 0)
  point P1 (-88.6376, -63.5246)
  point P2 (-88.6376, -90.4654)
  point P3 (-40.8775, -63.5246)
  point P4 (-40.8775, -90.4654)
hole "Hole2" at (-88.6376, 3.175, 63.5246) at (-88.6376, 3.175, 90.4654) at (-40.8775, 3.175, 63.5246) at (-40.8775, 3.175, 90.4654) direction (0, -1, 0) diameter 3.6576 end through all clearance for "Flat Head Machine Screw (82)" size "#6" standard "Ansi Unified Screw Threads"
sketch "Sketch9" plane through (0, 3.175, 0) normal (0, 1, 0) x (1, 0, 0)
  circle A0 centre (-88.6376, -63.5246) radius 1.8288 projected
  circle A1 centre (-40.8775, -63.5246) radius 1.8288 projected
  circle A2 centre (-40.8775, -90.4654) radius 1.8288 projected
  circle A3 centre (-88.6376, -90.4654) radius 1.8288 projected
  line L0 (-201.755, 49.9999) -> (52.245, 49.9999) projected
  line L1 (52.245, 49.9999) -> (52.245, -204.0001) projected
  line L2 (-201.755, -204.0001) -> (-201.755, 49.9999) projected
  line L3 (52.245, -204.0001) -> (-201.755, -204.0001) projected
  point P0 (0, 0)
  dimension "d90" = 93.1224
  dimension "d91" = 113.5245
equation "\"d16\" = d18"
equation "\"d17\" = d16"
equation "\"d19\" = d18"
equation "\"d20\" = d23"
equation "\"d21\" = d23"
equation "\"d22\" = d23"
equation "\"d62\" = d61"
equation "\"d63\" = d61"
equation "\"d64\" = d61"
equation "\"d65\" = Thickness"
equation "\"d81\" = Thickness"
equation "\"d88\" = Thickness"
equation "\"BendRadius\" = Thickness"
equation "\"BendReliefWidth\" = Thickness"
equation "\"BendReliefDepth\" = 0.5 * Thickness"
equation "\"CornerReliefSize\" = 4 * Thickness"
equation "\"MinimumRemnant\" = 2 * Thickness"
equation "\"TransitionRadius\" = BendRadius"
equation "\"JacobiRadiusSize\" = BendRadius"
equation "\"GapSize\" = Thickness"
equation "\"d59\" = BendRadius"
equation "\"Thickness\" = 3.175"
properties part number "BottomBasePlate" material "Aluminum 6061"
